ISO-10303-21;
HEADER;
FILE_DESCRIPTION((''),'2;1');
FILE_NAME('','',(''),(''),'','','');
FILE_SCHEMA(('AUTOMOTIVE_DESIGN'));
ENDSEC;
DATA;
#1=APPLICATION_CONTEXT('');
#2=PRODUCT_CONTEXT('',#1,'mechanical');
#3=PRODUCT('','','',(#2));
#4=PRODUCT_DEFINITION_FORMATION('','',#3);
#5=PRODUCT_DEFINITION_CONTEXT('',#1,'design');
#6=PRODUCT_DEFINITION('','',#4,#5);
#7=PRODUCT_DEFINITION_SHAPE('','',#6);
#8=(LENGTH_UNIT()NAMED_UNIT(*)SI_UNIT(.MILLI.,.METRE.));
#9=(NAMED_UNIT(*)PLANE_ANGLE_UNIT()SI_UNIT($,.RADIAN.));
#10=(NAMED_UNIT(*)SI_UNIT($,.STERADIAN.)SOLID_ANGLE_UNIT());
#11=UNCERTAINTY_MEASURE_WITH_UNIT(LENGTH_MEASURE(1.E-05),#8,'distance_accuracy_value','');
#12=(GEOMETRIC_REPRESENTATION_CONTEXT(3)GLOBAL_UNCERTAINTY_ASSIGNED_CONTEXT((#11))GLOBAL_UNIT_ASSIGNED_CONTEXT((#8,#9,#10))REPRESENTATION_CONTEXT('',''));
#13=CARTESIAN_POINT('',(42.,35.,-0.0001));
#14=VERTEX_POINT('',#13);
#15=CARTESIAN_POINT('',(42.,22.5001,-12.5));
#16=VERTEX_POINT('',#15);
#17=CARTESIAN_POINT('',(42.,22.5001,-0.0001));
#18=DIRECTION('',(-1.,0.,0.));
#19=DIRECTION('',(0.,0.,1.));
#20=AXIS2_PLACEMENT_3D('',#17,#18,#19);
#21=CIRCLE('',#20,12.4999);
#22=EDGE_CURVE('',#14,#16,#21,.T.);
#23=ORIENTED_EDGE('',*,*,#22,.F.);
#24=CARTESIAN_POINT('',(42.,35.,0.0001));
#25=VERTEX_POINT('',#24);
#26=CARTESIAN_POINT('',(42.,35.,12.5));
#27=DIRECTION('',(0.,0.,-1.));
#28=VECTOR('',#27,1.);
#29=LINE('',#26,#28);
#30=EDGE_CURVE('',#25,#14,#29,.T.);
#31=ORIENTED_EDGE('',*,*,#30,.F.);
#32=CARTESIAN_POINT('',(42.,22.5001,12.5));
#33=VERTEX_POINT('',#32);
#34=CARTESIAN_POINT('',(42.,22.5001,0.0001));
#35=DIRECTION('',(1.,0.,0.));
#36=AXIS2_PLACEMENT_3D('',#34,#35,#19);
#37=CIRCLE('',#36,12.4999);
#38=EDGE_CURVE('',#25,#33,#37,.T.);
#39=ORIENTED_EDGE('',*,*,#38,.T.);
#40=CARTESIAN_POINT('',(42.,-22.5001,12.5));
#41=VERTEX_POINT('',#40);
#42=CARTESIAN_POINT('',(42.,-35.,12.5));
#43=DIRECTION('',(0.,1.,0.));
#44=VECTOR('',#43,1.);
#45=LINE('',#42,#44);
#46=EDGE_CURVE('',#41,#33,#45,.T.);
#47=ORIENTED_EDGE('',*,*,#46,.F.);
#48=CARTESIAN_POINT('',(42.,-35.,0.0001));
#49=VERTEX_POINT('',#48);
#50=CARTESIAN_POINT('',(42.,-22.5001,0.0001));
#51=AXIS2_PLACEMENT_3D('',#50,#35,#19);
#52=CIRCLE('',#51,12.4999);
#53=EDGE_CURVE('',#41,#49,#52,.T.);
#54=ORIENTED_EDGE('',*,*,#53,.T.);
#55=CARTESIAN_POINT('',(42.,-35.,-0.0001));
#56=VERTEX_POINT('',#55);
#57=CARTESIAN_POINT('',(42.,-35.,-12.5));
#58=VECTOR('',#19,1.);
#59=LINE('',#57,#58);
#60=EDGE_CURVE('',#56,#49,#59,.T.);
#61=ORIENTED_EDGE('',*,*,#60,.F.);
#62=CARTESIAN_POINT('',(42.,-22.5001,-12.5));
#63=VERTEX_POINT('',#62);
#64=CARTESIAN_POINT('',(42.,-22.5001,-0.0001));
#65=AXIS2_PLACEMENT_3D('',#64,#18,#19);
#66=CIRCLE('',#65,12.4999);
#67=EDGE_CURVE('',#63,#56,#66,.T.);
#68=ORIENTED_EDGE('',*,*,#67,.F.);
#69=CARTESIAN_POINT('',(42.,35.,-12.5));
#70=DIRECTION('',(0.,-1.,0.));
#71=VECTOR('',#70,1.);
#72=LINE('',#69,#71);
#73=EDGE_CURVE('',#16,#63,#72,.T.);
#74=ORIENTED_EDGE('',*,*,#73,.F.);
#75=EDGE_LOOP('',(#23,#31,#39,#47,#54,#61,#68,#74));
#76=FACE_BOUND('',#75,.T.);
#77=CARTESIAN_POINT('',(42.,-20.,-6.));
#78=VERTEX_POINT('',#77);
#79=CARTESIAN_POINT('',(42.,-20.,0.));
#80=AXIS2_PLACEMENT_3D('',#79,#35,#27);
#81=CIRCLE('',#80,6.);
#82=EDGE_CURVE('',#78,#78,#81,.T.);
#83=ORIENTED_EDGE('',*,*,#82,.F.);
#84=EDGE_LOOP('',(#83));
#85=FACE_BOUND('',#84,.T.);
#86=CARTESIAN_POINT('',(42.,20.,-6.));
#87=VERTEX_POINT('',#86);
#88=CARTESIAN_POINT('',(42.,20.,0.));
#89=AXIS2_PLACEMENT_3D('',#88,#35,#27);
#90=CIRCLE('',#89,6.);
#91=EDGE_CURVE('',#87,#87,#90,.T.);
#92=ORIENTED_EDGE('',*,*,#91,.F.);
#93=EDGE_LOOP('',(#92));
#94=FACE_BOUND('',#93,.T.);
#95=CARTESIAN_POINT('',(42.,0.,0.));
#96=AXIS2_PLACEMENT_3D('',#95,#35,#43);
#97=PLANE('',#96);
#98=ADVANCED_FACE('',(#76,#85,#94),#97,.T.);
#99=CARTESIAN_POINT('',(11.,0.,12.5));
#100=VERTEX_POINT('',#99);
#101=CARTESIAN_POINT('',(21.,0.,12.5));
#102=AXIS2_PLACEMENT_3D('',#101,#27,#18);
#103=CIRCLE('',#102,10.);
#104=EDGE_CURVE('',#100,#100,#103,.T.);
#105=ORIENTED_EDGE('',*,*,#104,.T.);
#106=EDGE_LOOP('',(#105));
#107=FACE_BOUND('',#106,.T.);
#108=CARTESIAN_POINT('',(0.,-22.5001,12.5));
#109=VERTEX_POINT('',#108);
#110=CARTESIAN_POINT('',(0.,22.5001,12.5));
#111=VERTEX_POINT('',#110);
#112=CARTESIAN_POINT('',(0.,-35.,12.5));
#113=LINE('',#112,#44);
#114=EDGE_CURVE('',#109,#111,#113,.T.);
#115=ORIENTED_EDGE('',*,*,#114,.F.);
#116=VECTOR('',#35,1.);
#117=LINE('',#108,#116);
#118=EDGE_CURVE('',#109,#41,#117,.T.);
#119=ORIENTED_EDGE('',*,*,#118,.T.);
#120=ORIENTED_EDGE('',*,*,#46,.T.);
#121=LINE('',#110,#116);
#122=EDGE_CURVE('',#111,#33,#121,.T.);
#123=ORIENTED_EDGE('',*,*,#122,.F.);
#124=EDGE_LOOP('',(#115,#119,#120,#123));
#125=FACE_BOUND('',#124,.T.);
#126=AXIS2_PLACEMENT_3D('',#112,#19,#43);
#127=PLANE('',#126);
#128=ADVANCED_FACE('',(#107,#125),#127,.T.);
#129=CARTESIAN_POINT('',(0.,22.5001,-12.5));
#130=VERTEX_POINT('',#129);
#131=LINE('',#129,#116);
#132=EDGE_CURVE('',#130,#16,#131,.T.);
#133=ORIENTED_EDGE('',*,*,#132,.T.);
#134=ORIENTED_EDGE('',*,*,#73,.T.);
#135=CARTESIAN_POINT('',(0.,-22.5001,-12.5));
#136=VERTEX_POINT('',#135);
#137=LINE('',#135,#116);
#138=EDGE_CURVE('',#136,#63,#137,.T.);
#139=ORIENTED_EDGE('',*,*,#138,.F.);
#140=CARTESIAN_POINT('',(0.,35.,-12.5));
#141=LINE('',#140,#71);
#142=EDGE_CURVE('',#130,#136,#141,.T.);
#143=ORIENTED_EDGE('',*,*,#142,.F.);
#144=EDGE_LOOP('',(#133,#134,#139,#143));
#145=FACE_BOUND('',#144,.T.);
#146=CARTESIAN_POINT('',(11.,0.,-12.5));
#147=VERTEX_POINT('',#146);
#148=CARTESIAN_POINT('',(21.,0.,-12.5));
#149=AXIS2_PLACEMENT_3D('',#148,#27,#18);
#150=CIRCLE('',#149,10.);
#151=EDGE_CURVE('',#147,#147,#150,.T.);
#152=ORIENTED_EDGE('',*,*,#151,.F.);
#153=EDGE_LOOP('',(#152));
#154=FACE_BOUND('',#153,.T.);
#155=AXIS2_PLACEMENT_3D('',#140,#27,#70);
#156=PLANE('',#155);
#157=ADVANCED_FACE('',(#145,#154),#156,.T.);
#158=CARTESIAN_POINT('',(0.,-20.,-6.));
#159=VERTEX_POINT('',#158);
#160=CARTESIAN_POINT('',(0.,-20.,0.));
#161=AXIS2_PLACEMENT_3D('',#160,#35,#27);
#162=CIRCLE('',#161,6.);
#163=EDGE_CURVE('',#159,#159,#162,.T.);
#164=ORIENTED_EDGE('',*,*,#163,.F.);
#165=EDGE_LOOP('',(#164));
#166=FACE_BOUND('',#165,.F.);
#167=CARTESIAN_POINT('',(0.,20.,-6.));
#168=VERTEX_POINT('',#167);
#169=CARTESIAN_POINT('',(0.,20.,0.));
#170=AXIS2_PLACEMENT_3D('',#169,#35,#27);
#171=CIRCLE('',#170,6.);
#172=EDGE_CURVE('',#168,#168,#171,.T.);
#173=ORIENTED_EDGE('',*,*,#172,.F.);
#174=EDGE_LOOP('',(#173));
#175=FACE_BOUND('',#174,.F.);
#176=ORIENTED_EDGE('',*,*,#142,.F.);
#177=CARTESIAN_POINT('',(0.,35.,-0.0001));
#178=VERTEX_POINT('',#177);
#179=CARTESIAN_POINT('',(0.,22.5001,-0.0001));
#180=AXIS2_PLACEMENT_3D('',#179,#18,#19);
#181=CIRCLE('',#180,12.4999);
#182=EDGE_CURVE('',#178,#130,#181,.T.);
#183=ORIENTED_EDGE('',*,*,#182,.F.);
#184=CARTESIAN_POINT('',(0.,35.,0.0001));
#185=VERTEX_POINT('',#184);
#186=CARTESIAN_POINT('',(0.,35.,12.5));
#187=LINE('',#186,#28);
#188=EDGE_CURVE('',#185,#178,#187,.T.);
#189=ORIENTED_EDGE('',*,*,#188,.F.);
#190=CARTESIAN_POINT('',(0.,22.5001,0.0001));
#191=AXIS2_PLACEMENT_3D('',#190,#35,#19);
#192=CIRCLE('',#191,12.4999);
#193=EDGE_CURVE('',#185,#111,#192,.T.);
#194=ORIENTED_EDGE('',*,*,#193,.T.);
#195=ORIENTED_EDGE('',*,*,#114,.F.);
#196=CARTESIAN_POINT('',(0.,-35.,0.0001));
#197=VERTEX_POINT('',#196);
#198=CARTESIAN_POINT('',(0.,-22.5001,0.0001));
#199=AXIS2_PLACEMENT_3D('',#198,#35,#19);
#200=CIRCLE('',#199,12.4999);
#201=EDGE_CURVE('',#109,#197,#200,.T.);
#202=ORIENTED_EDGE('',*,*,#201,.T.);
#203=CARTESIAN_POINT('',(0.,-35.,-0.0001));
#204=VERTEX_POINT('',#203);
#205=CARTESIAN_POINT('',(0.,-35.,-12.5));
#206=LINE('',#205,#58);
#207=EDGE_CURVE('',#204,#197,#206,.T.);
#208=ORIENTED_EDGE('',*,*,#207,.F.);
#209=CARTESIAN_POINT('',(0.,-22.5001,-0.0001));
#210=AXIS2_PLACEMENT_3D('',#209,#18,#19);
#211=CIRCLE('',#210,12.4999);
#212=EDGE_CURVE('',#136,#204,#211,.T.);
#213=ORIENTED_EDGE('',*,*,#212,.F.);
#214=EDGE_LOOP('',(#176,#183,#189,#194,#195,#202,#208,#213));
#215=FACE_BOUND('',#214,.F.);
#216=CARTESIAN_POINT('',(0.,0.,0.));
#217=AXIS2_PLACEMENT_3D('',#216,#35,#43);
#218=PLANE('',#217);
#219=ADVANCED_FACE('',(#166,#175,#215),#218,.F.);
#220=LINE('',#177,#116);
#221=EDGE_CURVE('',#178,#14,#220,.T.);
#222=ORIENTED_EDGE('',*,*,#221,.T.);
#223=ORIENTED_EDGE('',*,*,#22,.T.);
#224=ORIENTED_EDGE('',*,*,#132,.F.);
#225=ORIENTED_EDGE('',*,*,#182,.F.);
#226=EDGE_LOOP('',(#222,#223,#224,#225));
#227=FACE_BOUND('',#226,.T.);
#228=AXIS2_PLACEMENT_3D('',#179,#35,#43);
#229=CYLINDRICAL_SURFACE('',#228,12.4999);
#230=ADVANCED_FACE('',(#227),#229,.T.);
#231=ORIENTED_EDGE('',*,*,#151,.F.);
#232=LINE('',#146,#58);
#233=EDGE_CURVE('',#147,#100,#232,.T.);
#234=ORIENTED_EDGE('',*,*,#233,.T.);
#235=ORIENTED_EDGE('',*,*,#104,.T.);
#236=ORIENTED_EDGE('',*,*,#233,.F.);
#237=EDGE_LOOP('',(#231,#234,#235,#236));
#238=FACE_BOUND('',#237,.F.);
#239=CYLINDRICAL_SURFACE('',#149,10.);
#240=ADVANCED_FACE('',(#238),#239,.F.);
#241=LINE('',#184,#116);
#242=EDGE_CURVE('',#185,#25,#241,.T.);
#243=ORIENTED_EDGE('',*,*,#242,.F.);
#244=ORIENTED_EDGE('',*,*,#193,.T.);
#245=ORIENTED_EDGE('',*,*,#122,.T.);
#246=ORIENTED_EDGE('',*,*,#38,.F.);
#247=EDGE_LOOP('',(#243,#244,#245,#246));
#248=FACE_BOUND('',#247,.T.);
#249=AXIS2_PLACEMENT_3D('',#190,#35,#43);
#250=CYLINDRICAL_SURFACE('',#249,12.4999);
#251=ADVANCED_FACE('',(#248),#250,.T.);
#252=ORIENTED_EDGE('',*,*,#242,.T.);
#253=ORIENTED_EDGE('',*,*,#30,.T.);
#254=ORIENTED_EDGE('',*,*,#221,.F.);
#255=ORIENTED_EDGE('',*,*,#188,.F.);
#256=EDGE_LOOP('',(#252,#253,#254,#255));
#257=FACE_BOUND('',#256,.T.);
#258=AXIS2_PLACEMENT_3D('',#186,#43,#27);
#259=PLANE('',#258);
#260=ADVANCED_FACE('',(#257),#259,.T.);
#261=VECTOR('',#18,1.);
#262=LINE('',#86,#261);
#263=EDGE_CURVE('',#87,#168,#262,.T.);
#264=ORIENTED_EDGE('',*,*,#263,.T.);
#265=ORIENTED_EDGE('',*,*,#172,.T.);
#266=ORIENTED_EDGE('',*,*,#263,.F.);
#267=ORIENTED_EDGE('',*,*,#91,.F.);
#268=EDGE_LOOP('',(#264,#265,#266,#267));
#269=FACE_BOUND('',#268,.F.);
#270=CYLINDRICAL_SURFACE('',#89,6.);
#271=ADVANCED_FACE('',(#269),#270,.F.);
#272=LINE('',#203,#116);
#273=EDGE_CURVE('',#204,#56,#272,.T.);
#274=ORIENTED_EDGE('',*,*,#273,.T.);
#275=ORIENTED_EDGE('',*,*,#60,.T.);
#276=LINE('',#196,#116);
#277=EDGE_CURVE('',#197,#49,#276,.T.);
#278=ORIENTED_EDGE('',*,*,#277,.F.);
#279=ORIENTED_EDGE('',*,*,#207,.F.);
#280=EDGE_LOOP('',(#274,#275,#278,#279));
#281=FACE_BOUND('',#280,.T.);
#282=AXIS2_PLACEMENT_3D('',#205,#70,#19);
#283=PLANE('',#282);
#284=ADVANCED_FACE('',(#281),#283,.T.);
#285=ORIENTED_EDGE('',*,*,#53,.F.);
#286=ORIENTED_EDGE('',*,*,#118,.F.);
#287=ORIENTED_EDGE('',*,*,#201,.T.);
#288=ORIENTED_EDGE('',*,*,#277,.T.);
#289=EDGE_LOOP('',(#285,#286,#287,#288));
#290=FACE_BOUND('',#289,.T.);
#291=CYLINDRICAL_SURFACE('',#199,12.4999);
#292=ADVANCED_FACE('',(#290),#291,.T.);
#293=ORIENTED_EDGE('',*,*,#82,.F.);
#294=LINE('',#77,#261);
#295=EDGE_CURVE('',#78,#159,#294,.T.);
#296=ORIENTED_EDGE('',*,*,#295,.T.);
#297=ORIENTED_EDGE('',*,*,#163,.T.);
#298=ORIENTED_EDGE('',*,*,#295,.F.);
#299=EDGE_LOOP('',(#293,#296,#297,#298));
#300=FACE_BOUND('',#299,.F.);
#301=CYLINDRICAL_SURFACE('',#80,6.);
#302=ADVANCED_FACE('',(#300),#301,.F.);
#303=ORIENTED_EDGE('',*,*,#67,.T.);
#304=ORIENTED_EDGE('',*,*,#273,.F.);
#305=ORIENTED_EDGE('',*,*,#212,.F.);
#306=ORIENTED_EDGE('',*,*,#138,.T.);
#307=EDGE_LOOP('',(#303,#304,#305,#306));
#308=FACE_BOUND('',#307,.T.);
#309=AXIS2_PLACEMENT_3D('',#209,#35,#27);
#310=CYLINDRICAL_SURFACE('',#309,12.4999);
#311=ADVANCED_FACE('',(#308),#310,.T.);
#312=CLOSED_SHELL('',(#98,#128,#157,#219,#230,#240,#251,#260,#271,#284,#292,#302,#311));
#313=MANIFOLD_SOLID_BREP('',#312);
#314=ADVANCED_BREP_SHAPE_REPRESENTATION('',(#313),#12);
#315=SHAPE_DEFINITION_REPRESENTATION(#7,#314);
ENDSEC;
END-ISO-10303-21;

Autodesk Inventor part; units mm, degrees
ref_plane "YZ Plane" through (0, 0, 0) normal (1, 0, 0) x (0, 1, 0)
ref_plane "XZ Plane" through (0, 0, 0) normal (0, 1, 0) x (-1, 0, 0)
ref_plane "XY Plane" through (0, 0, 0) normal (0, 0, 1) x (1, 0, 0)
sketch "Sketch2" plane through (0, 0, 0) normal (1, 0, 0) x (0, 1, 0)
  line L0 (35, 12.5) -> (35, -12.5)
  line L1 (35, -12.5) -> (-35, -12.5)
  line L2 (-35, -12.5) -> (-35, 12.5)
  line L3 (-35, 12.5) -> (35, 12.5)
  point P0 (0, 0)
  dimension "d11" = 25
  dimension "d12" = 70
  dimension "d13" = 35
  dimension "d14" = 12.5
extrude "Extrusion2" add sketch "Sketch2" along normal blind 42
full round fillet "Full Round Fillet1" first side at (14, 11.6667, 12.5) centre faces at (14, 35, -4.1667) second side at (14, -11.6667, -12.5)
full round fillet "Full Round Fillet2" first side at (28, 3.3334, 12.5) centre faces at (14, -35, 4.1667) second side at (14, -15.8333, -12.5)
sketch "Sketch3" plane through (42, 22.5, -12.5) normal (0, 0, -1) x (-1, 0, 0)
  circle A0 centre (21, -22.5) radius 10
  line L0 (42, -45) -> (42, 0) projected
  point P0 (42, -22.5)
  point P1 (42, -22.5)
  dimension "d15" = 20
  dimension "d16" = 21
sketch "Sketch4" plane through (42, 0, 0) normal (1, 0, 0) x (0, 0, -1)
  circle A0 centre (0, -20) radius 6
  circle A1 centre (0, 20) radius 6
  point P0 (0, 0)
  dimension "d17" = 12
  dimension "d18" = 12
  dimension "d31" = 40
  dimension "d32" = 20
extrude "Extrusion3" cut sketch "Sketch3" against normal blind 42
extrude "Extrusion4" cut sketch "Sketch4" against normal blind 42
thread "Thread1" size "M12x1.75" class "6H" standard "ANSI Metric M Profile" full length
thread "Thread2" size "M12x1.75" class "6H" standard "ANSI Metric M Profile" full length
thread "Thread4" size "M20x2.5" class "6H" standard "ANSI Metric M Profile" full length
properties part number "Junção Fuso" material "Steel AISI 1050"
